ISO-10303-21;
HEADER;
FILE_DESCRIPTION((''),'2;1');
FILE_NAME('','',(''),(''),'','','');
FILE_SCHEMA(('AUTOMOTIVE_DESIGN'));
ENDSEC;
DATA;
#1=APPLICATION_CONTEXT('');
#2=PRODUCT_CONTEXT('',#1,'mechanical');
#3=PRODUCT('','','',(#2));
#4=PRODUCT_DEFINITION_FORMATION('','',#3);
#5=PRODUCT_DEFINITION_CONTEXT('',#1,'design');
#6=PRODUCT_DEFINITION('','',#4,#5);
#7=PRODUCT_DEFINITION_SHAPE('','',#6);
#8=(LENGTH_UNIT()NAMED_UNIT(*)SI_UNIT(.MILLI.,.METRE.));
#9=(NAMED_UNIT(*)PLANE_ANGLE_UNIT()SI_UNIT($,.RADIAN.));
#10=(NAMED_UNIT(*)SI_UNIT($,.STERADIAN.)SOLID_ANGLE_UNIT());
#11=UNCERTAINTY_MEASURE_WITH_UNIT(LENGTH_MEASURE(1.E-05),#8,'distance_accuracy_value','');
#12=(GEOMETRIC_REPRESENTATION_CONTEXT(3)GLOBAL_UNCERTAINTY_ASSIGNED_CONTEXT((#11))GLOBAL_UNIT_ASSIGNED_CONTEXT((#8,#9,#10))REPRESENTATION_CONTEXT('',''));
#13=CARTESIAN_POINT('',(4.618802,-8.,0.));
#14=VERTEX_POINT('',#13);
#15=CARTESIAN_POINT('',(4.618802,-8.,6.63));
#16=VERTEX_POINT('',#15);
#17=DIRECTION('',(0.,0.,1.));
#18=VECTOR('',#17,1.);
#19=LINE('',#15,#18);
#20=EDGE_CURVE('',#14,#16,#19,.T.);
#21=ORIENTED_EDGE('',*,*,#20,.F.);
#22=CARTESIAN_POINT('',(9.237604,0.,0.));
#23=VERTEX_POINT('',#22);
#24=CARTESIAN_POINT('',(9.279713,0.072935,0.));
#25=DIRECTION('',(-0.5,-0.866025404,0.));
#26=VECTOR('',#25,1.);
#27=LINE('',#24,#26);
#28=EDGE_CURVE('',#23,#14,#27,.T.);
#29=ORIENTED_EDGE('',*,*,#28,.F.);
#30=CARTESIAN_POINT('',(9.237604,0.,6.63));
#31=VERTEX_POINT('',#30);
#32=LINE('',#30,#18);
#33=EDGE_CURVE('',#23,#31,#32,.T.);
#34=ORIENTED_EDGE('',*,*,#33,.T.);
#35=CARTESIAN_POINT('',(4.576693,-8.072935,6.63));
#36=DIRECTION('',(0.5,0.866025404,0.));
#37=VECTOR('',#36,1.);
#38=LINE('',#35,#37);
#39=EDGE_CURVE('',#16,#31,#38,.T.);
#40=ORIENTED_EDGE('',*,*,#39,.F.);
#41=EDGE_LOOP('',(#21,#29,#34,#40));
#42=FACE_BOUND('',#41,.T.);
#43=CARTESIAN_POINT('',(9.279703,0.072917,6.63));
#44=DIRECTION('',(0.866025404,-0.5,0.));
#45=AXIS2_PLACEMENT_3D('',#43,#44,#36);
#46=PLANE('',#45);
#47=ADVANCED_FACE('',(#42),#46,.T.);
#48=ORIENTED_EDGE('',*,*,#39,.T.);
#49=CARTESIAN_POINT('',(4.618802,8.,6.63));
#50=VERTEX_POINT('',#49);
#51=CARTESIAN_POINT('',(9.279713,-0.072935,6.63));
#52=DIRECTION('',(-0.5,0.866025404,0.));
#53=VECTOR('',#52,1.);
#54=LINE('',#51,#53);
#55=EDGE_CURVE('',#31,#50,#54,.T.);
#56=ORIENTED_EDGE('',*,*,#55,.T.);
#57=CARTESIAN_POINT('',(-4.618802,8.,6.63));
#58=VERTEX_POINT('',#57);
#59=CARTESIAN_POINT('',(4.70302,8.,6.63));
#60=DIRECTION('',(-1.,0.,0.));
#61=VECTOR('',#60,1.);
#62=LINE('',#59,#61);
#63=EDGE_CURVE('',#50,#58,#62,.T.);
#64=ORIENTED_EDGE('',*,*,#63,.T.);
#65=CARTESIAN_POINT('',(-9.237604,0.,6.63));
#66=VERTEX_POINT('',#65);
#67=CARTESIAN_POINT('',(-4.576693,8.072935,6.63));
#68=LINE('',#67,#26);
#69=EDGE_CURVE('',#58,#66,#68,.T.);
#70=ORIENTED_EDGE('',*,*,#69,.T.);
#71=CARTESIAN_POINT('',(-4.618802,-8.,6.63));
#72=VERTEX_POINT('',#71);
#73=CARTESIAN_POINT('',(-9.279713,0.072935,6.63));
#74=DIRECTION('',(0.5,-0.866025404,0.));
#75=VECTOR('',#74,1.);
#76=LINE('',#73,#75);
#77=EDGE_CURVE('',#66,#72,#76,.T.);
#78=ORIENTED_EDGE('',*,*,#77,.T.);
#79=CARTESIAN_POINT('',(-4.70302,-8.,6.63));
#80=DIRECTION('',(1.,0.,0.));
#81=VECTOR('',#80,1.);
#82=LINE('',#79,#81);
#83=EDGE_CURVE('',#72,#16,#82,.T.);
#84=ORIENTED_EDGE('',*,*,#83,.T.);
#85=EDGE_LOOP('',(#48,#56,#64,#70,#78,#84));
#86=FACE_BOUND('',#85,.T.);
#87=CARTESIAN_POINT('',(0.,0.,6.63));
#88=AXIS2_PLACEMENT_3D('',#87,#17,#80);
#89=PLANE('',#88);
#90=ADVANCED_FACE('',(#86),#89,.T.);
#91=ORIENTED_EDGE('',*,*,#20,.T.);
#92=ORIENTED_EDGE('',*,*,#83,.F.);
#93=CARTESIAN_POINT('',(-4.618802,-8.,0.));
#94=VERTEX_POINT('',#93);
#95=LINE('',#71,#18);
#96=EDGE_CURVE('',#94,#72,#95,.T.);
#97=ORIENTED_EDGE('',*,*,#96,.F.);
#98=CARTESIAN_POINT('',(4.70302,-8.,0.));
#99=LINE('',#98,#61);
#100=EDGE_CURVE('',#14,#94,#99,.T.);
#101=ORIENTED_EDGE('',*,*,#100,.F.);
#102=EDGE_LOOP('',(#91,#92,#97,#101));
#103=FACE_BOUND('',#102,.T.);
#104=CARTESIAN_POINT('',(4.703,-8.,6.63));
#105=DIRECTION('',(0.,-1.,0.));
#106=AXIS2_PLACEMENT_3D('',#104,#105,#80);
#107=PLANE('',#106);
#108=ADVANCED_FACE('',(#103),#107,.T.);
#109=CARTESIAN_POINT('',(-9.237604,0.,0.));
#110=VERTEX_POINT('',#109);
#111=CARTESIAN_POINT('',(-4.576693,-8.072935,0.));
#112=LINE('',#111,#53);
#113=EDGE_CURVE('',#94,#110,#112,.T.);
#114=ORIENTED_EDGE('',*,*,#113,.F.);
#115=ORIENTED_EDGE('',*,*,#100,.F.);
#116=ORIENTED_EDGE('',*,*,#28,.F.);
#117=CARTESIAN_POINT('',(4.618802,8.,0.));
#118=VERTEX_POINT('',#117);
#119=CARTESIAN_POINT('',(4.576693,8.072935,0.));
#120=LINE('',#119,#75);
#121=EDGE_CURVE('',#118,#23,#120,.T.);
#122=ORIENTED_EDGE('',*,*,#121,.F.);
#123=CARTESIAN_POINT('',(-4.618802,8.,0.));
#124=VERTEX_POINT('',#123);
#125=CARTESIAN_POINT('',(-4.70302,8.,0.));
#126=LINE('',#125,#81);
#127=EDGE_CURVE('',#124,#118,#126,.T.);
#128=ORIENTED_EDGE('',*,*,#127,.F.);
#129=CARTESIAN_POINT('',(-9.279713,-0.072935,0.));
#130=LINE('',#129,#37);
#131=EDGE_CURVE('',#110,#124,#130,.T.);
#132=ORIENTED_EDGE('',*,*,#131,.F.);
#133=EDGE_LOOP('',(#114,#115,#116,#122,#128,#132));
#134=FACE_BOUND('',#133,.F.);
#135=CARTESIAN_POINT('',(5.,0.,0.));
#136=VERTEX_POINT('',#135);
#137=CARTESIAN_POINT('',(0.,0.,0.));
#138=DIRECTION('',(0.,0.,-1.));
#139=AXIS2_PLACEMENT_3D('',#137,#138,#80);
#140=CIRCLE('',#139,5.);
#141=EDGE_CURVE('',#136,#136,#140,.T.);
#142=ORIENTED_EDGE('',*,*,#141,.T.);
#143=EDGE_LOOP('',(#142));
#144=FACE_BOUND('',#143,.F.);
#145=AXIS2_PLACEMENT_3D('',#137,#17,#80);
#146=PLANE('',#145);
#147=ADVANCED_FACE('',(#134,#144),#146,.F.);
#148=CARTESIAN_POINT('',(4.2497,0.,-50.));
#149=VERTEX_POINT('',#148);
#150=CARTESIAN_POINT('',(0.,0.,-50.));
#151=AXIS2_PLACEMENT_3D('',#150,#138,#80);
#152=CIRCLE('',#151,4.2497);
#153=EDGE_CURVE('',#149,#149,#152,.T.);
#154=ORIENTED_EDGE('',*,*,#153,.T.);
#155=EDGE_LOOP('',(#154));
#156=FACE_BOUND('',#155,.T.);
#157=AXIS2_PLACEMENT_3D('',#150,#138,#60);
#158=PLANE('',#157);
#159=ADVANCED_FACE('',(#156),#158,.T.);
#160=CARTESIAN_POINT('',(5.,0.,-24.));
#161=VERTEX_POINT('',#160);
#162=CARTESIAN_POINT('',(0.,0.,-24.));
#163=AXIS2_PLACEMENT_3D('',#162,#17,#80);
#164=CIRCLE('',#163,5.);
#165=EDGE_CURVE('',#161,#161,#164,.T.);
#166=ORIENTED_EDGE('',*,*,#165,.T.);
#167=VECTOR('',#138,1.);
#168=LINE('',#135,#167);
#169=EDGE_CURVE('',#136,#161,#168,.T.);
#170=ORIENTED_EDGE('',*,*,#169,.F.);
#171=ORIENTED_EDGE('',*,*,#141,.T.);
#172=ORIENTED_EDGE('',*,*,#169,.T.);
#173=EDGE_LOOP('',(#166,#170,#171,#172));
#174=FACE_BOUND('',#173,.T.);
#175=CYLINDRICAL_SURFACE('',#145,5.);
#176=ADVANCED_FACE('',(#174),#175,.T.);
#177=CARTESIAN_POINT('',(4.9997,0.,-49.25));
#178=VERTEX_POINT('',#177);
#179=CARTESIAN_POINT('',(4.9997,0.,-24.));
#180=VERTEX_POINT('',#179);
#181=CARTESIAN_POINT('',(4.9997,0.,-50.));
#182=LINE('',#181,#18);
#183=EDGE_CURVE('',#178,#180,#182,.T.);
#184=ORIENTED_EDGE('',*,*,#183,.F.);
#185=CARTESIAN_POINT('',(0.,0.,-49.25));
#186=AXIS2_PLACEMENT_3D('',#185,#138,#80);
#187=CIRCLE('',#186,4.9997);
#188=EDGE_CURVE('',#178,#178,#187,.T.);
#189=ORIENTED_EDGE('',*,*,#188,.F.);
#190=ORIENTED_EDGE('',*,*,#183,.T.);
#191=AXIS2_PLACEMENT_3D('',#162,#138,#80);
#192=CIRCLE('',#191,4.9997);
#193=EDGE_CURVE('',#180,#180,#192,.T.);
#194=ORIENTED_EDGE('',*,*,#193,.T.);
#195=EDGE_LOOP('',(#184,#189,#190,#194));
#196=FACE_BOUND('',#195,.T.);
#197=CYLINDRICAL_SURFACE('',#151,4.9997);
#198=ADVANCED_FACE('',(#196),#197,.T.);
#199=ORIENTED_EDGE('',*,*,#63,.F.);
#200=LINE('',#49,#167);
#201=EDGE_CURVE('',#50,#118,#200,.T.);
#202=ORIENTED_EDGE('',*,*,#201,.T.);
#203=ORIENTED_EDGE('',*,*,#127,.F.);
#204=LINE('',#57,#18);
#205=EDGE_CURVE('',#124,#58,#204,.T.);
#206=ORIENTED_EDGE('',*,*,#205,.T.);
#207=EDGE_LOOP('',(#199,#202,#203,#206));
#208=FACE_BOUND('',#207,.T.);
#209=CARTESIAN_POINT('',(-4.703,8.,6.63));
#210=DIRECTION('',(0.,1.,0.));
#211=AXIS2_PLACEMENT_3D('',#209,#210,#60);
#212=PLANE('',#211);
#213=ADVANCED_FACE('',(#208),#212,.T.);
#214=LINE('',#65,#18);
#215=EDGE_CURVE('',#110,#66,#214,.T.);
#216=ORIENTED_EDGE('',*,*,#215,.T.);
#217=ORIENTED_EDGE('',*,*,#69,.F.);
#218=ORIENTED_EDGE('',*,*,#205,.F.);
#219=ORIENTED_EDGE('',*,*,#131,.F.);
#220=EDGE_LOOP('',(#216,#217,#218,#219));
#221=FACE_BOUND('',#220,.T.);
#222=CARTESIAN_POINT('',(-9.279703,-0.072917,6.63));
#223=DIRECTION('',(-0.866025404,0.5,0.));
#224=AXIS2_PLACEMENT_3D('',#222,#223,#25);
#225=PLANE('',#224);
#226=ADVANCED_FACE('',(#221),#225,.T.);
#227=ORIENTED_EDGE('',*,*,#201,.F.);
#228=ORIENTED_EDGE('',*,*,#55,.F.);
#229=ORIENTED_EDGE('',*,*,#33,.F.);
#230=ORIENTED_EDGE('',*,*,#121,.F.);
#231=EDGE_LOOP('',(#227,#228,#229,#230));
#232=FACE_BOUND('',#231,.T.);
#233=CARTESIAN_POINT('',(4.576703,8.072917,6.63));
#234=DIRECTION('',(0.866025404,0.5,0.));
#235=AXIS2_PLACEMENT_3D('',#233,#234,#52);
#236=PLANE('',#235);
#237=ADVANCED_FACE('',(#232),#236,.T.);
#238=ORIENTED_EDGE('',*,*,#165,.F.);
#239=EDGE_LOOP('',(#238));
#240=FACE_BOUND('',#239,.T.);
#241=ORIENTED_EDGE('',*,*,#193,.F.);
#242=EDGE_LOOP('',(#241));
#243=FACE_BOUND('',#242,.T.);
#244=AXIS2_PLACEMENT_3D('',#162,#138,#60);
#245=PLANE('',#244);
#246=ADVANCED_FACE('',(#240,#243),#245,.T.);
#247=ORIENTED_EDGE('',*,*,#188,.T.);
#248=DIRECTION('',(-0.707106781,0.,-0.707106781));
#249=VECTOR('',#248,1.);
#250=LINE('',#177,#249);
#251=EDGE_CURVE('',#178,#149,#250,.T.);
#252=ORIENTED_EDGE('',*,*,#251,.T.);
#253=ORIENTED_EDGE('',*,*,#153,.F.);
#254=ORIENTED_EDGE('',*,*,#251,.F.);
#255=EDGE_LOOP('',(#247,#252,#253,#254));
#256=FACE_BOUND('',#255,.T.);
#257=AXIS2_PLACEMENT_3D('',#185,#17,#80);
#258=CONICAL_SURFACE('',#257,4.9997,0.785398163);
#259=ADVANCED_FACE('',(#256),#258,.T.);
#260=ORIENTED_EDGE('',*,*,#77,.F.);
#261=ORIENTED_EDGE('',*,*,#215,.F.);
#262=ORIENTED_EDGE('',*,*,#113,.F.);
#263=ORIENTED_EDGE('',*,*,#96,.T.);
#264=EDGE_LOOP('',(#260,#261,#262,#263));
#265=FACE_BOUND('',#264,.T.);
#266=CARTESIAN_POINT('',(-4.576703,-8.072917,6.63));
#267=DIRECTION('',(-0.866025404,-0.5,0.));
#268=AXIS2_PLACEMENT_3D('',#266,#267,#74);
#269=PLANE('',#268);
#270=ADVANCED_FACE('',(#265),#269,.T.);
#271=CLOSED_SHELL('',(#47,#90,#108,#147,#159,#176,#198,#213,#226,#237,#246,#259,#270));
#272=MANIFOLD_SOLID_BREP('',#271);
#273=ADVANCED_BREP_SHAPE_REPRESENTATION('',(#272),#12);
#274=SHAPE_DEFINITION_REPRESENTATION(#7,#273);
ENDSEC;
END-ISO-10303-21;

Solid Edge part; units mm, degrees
sketch "Sketch1" plane through (0, 0, 0) normal (0, 0, 1) x (1, 0, 0)
  circle A0 centre (0, 0) radius 9.28
  dimension "D1" = 18.56
extrude "Protrusion1" add sketch "Sketch1" along normal blind 6.63
sketch "Sketch2" plane through (0, 0, 0) normal (0, 0, -1) x (1, 0, 0)
  circle A0 centre (0, 0) radius 5
extrude "Protrusion2" add sketch "Sketch2" along normal blind 50
sketch "Sketch3" plane through (0, 0, -50) normal (0, 0, -1) x (1, 0, 0)
  circle A0 centre (0, 0) radius 4.9997
extrude "Cutout1" cut sketch "Sketch3" against normal blind 26 flip side to cut
chamfer "Chamfer_1" distance 0.75 angle 45 1 edges at (-4.9997, 0, -50)
sketch "Sketch4" plane through (0, 0, 6.63) normal (0, 0, 1) x (1, 0, 0)
  line L0 (-4.703, 8) -> (4.703, 8)
  dimension "D1" = 16
extrude "Cutout2" cut sketch "Sketch4" against normal up to next material side at (0, 8.05, 6.63)
pattern_circular "Pattern1" count 6 over 360 about axis through (0, 0, 6.63) along (0, 0, 1) of "Cutout2"
properties part number "24101208"
